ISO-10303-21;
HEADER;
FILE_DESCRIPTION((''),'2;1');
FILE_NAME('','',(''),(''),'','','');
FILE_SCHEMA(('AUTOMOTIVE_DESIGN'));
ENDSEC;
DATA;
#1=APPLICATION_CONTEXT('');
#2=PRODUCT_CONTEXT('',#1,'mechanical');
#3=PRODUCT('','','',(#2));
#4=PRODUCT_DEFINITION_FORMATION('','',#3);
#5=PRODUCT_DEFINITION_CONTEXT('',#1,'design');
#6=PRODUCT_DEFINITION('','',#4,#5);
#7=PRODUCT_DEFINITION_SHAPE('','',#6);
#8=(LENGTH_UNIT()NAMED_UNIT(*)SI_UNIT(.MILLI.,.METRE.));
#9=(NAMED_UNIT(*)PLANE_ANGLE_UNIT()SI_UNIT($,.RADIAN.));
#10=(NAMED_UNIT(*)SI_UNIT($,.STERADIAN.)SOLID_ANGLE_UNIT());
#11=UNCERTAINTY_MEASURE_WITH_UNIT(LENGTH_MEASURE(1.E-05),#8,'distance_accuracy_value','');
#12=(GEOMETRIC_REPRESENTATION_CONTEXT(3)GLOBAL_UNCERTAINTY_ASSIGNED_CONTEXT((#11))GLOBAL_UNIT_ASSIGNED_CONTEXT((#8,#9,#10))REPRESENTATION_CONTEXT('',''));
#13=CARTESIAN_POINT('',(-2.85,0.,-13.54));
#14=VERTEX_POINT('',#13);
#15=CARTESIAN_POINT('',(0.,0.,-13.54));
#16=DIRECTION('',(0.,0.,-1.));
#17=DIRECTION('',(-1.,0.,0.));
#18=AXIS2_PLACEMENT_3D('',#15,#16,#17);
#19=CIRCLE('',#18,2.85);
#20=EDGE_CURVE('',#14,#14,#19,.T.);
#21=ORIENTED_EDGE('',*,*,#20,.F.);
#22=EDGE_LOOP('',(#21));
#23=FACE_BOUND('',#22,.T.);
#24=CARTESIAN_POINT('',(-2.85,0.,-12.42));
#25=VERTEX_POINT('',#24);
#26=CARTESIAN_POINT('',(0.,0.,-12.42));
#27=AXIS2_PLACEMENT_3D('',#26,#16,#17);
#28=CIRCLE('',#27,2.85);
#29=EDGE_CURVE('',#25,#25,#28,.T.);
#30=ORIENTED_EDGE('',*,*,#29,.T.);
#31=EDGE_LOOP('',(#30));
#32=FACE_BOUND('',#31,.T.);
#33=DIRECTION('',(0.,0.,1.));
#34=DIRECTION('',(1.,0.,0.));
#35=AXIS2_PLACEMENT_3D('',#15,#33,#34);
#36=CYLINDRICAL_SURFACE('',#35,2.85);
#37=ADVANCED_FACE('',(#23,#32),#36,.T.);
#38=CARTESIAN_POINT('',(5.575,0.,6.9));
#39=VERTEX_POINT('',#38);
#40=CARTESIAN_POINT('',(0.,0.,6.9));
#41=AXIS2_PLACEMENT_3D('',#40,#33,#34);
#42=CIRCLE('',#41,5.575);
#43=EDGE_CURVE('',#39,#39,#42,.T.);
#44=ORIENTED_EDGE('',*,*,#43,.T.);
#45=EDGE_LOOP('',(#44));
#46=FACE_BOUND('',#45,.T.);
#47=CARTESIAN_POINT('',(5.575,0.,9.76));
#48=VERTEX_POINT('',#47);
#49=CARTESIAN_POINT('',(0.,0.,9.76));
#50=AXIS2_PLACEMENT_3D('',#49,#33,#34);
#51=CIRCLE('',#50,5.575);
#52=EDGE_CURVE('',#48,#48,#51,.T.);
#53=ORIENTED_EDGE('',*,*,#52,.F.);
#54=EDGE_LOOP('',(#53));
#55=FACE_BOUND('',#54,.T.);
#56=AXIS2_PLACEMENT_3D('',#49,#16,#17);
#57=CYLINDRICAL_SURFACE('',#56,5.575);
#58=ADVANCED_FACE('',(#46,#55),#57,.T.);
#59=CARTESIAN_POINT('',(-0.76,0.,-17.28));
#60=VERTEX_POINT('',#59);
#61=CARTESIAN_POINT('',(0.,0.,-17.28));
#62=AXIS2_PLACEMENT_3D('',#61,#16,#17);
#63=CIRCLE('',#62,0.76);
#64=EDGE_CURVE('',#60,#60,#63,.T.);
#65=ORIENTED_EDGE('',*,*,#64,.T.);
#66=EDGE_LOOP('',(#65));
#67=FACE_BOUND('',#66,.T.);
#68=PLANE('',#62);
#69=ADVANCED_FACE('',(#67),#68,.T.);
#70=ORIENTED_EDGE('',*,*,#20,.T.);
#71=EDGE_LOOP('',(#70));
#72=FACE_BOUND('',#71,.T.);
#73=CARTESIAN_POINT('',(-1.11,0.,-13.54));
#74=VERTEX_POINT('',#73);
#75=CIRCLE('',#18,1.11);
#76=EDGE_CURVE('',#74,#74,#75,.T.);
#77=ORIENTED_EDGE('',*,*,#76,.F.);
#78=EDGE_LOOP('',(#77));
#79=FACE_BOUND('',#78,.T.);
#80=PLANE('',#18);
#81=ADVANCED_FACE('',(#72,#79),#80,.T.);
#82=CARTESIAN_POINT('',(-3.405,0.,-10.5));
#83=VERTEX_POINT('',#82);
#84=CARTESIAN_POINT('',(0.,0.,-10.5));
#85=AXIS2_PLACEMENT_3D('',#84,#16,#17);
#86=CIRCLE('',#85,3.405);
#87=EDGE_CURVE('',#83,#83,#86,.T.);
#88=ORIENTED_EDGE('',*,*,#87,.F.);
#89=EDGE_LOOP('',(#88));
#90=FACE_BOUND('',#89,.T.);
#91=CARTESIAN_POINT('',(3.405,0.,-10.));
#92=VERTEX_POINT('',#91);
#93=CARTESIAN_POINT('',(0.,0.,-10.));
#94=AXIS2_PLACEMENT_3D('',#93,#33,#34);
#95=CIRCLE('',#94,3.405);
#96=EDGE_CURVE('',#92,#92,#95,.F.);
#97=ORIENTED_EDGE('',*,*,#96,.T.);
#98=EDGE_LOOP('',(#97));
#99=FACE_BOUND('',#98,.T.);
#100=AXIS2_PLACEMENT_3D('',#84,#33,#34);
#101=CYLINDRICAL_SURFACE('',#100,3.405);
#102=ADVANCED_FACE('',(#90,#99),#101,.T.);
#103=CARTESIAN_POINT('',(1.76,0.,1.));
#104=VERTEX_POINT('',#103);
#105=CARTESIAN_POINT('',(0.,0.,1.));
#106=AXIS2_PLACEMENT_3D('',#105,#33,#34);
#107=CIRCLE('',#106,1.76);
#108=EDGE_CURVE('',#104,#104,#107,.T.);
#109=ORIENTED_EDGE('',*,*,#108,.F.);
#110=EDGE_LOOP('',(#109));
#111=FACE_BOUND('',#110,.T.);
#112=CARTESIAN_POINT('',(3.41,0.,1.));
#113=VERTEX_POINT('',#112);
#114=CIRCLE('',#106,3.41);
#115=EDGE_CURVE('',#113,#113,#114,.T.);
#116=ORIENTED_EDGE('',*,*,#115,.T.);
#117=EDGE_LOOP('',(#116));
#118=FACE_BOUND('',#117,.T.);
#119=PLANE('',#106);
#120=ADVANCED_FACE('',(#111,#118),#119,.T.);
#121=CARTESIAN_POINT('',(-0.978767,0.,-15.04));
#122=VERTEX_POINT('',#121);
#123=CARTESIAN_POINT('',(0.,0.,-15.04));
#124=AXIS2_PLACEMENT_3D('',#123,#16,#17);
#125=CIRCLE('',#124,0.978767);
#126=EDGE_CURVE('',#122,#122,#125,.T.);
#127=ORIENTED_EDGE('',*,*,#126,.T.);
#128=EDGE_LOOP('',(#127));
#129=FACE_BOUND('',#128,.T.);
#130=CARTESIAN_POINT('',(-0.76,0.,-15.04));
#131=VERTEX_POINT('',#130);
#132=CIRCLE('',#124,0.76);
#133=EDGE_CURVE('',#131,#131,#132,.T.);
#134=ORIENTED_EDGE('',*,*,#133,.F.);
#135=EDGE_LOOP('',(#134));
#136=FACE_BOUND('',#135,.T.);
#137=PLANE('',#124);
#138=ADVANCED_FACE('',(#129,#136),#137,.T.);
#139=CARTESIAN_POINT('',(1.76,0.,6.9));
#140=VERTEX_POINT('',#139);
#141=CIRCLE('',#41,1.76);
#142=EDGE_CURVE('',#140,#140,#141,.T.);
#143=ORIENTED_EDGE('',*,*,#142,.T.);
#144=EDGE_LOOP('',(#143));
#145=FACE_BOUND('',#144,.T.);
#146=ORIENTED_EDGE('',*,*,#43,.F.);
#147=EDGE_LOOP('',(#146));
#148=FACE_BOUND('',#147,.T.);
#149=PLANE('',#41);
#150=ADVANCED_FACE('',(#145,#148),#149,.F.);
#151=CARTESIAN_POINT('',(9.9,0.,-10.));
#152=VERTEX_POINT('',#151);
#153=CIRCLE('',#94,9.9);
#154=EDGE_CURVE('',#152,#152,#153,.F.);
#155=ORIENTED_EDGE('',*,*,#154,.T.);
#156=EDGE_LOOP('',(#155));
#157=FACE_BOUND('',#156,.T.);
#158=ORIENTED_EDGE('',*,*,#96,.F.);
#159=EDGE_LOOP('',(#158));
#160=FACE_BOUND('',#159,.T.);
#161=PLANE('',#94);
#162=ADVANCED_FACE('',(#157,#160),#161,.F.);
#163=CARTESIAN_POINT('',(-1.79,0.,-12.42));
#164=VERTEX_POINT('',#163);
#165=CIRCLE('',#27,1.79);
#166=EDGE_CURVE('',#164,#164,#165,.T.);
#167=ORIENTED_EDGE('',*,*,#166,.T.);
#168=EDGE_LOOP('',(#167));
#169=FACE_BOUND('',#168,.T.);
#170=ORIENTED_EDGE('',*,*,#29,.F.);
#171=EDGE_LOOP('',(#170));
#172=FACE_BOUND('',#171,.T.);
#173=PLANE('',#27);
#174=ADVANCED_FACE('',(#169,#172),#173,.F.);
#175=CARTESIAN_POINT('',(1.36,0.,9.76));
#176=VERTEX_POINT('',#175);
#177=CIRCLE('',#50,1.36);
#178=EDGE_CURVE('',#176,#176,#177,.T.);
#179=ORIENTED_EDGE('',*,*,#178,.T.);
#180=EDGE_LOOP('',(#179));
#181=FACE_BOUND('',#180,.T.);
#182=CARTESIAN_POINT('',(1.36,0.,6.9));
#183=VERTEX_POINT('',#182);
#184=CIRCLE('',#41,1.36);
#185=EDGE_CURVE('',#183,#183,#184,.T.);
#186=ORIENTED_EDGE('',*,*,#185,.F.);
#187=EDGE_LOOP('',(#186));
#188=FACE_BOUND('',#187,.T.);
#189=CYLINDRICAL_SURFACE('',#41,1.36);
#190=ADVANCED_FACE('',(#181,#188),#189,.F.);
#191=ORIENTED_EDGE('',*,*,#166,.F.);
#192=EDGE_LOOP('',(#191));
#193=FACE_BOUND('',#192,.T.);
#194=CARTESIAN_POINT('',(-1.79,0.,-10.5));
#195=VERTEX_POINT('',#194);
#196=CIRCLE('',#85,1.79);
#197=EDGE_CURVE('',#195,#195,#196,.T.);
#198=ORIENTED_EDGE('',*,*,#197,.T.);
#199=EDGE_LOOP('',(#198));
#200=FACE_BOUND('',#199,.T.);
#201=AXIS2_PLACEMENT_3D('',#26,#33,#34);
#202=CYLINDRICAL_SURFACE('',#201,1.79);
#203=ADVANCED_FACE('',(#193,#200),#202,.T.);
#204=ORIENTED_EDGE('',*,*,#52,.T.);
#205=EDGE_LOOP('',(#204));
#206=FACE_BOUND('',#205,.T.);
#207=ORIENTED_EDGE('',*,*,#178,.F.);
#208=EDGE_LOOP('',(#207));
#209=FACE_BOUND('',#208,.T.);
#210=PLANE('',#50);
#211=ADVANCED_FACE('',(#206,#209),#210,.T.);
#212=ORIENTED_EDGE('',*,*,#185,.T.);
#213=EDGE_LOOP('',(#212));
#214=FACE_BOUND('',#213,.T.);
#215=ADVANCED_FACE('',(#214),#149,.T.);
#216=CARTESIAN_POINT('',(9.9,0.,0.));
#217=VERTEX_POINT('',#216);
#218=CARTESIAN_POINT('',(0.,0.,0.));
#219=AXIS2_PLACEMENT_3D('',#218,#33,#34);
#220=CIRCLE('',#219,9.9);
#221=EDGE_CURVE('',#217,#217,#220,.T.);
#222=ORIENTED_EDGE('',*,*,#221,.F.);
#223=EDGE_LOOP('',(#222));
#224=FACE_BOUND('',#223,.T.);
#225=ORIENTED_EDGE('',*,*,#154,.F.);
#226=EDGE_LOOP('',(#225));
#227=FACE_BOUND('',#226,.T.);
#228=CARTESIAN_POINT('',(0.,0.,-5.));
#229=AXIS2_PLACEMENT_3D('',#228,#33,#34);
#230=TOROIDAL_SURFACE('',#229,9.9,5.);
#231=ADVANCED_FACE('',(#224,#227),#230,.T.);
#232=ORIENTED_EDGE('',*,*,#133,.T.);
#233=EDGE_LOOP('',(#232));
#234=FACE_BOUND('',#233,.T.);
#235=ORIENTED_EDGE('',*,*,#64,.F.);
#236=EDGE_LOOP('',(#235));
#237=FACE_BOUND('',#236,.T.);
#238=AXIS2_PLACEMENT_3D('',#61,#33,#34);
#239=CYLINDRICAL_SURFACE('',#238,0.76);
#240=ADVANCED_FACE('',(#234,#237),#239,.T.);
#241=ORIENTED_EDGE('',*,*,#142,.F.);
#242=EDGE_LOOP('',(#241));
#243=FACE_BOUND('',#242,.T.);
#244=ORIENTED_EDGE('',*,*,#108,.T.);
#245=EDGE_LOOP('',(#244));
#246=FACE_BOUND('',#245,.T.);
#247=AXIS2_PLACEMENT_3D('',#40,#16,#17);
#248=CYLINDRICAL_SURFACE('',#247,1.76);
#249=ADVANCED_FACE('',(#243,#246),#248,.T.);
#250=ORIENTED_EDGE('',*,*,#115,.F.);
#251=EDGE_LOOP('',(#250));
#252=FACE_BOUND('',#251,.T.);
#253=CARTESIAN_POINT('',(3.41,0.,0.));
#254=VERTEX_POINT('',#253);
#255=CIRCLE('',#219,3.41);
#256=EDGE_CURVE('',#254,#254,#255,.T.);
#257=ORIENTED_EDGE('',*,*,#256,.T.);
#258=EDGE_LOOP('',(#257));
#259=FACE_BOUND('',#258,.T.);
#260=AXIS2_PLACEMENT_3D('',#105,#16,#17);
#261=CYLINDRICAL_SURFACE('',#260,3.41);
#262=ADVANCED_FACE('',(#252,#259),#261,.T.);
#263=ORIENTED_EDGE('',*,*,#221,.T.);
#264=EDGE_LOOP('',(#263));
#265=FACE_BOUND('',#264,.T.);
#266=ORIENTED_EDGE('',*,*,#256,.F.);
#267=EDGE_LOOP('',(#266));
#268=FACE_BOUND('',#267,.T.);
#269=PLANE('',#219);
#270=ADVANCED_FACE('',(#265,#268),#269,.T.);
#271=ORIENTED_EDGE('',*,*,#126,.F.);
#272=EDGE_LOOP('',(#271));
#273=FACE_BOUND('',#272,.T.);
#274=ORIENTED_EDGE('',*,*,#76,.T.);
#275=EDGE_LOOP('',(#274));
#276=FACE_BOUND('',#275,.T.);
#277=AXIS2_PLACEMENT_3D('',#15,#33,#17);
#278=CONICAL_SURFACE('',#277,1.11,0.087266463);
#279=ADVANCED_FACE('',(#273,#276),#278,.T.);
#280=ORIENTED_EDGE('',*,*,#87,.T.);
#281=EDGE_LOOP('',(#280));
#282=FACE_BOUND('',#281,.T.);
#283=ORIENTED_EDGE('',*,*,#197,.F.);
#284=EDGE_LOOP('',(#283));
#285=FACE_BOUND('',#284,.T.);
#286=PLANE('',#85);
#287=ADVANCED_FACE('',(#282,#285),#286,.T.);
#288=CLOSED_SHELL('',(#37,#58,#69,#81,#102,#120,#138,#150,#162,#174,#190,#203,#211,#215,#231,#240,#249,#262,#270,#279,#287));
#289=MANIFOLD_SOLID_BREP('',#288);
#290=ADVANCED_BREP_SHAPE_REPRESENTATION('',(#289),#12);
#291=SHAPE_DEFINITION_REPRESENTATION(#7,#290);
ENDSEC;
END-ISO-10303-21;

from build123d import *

# Parameters (mm, degrees)
SKETCH1_R           = 14.9
BOSS_EXTRUDE1_DEPTH = 10
FILLET1_R           = 5
SKETCH3_R           = 3.41
BOSS_EXTRUDE2_DEPTH = 1
SKETCH4_R           = 1.76
BOSS_EXTRUDE3_DEPTH = 5.9
SKETCH5_R           = 5.575
BOSS_EXTRUDE4_DEPTH = 2.86
SKETCH6_R           = 1.36
CUT_EXTRUDE1_DEPTH  = 2.86
SKETCH7_R           = 3.405
BOSS_EXTRUDE5_DEPTH = 0.5
SKETCH8_R           = 1.79
BOSS_EXTRUDE6_DEPTH = 1.92
SKETCH9_R           = 2.85
BOSS_EXTRUDE7_DEPTH = 1.12
SKETCH10_R          = 1.11
BOSS_EXTRUDE8_DEPTH = 1.5
BOSS_EXTRUDE8_TAPER = 5
SKETCH11_R          = 0.76
BOSS_EXTRUDE9_DEPTH = 2.24


with BuildPart() as part:
    # Sketch1 → Boss-Extrude1 (new body)
    with BuildSketch(Plane.XY):
        Circle(SKETCH1_R)
    extrude(amount=-BOSS_EXTRUDE1_DEPTH)

    # Fillet1
    fillet1_edges = [part.edges().sort_by_distance(p)[0] for p in [
        (-14.9, 0, 0),
        (-14.9, 0, -10),
    ]]
    fillet(fillet1_edges, radius=FILLET1_R - 0.0001)  # a hair under: the kernel refuses the full size

    # Sketch3 → Boss-Extrude2 (add)
    with BuildSketch(Plane.XY):
        Circle(SKETCH3_R)
    extrude(amount=BOSS_EXTRUDE2_DEPTH)

    # Sketch4 → Boss-Extrude3 (add)
    with BuildSketch(Plane.XY.offset(1)):
        Circle(SKETCH4_R)
    extrude(amount=BOSS_EXTRUDE3_DEPTH)

    # Sketch5 → Boss-Extrude4 (add)
    with BuildSketch(Plane.XY.offset(6.9)):
        Circle(SKETCH5_R)
    extrude(amount=BOSS_EXTRUDE4_DEPTH)

    # Sketch6 → Cut-Extrude1 (cut)
    with BuildSketch(Plane.XY.offset(9.76)):
        Circle(SKETCH6_R)
    extrude(amount=-CUT_EXTRUDE1_DEPTH, mode=Mode.SUBTRACT)

    # Sketch7 → Boss-Extrude5 (add)
    with BuildSketch(Plane(origin=(0, 0, -10), x_dir=(-1, 0, 0), z_dir=(0, 0, -1))):
        with Locations(Location((0, 0, 0), (0, 0, 180))):
            Circle(SKETCH7_R)
    extrude(amount=BOSS_EXTRUDE5_DEPTH)

    # Sketch8 → Boss-Extrude6 (add)
    with BuildSketch(Plane(origin=(0, 0, -10.5), x_dir=(-1, 0, 0), z_dir=(0, 0, -1))):
        Circle(SKETCH8_R)
    extrude(amount=BOSS_EXTRUDE6_DEPTH)

    # Sketch9 → Boss-Extrude7 (add)
    with BuildSketch(Plane(origin=(0, 0, -12.42), x_dir=(-1, 0, 0), z_dir=(0, 0, -1))):
        Circle(SKETCH9_R)
    extrude(amount=BOSS_EXTRUDE7_DEPTH)

    # Sketch10 → Boss-Extrude8 (add)
    with BuildSketch(Plane(origin=(0, 0, -13.54), x_dir=(-1, 0, 0), z_dir=(0, 0, -1))):
        Circle(SKETCH10_R)
    extrude(amount=BOSS_EXTRUDE8_DEPTH, taper=BOSS_EXTRUDE8_TAPER)

    # Sketch11 → Boss-Extrude9 (add)
    with BuildSketch(Plane(origin=(0, 0, -15.04), x_dir=(-1, 0, 0), z_dir=(0, 0, -1))):
        Circle(SKETCH11_R)
    extrude(amount=BOSS_EXTRUDE9_DEPTH)


solid = part.part
